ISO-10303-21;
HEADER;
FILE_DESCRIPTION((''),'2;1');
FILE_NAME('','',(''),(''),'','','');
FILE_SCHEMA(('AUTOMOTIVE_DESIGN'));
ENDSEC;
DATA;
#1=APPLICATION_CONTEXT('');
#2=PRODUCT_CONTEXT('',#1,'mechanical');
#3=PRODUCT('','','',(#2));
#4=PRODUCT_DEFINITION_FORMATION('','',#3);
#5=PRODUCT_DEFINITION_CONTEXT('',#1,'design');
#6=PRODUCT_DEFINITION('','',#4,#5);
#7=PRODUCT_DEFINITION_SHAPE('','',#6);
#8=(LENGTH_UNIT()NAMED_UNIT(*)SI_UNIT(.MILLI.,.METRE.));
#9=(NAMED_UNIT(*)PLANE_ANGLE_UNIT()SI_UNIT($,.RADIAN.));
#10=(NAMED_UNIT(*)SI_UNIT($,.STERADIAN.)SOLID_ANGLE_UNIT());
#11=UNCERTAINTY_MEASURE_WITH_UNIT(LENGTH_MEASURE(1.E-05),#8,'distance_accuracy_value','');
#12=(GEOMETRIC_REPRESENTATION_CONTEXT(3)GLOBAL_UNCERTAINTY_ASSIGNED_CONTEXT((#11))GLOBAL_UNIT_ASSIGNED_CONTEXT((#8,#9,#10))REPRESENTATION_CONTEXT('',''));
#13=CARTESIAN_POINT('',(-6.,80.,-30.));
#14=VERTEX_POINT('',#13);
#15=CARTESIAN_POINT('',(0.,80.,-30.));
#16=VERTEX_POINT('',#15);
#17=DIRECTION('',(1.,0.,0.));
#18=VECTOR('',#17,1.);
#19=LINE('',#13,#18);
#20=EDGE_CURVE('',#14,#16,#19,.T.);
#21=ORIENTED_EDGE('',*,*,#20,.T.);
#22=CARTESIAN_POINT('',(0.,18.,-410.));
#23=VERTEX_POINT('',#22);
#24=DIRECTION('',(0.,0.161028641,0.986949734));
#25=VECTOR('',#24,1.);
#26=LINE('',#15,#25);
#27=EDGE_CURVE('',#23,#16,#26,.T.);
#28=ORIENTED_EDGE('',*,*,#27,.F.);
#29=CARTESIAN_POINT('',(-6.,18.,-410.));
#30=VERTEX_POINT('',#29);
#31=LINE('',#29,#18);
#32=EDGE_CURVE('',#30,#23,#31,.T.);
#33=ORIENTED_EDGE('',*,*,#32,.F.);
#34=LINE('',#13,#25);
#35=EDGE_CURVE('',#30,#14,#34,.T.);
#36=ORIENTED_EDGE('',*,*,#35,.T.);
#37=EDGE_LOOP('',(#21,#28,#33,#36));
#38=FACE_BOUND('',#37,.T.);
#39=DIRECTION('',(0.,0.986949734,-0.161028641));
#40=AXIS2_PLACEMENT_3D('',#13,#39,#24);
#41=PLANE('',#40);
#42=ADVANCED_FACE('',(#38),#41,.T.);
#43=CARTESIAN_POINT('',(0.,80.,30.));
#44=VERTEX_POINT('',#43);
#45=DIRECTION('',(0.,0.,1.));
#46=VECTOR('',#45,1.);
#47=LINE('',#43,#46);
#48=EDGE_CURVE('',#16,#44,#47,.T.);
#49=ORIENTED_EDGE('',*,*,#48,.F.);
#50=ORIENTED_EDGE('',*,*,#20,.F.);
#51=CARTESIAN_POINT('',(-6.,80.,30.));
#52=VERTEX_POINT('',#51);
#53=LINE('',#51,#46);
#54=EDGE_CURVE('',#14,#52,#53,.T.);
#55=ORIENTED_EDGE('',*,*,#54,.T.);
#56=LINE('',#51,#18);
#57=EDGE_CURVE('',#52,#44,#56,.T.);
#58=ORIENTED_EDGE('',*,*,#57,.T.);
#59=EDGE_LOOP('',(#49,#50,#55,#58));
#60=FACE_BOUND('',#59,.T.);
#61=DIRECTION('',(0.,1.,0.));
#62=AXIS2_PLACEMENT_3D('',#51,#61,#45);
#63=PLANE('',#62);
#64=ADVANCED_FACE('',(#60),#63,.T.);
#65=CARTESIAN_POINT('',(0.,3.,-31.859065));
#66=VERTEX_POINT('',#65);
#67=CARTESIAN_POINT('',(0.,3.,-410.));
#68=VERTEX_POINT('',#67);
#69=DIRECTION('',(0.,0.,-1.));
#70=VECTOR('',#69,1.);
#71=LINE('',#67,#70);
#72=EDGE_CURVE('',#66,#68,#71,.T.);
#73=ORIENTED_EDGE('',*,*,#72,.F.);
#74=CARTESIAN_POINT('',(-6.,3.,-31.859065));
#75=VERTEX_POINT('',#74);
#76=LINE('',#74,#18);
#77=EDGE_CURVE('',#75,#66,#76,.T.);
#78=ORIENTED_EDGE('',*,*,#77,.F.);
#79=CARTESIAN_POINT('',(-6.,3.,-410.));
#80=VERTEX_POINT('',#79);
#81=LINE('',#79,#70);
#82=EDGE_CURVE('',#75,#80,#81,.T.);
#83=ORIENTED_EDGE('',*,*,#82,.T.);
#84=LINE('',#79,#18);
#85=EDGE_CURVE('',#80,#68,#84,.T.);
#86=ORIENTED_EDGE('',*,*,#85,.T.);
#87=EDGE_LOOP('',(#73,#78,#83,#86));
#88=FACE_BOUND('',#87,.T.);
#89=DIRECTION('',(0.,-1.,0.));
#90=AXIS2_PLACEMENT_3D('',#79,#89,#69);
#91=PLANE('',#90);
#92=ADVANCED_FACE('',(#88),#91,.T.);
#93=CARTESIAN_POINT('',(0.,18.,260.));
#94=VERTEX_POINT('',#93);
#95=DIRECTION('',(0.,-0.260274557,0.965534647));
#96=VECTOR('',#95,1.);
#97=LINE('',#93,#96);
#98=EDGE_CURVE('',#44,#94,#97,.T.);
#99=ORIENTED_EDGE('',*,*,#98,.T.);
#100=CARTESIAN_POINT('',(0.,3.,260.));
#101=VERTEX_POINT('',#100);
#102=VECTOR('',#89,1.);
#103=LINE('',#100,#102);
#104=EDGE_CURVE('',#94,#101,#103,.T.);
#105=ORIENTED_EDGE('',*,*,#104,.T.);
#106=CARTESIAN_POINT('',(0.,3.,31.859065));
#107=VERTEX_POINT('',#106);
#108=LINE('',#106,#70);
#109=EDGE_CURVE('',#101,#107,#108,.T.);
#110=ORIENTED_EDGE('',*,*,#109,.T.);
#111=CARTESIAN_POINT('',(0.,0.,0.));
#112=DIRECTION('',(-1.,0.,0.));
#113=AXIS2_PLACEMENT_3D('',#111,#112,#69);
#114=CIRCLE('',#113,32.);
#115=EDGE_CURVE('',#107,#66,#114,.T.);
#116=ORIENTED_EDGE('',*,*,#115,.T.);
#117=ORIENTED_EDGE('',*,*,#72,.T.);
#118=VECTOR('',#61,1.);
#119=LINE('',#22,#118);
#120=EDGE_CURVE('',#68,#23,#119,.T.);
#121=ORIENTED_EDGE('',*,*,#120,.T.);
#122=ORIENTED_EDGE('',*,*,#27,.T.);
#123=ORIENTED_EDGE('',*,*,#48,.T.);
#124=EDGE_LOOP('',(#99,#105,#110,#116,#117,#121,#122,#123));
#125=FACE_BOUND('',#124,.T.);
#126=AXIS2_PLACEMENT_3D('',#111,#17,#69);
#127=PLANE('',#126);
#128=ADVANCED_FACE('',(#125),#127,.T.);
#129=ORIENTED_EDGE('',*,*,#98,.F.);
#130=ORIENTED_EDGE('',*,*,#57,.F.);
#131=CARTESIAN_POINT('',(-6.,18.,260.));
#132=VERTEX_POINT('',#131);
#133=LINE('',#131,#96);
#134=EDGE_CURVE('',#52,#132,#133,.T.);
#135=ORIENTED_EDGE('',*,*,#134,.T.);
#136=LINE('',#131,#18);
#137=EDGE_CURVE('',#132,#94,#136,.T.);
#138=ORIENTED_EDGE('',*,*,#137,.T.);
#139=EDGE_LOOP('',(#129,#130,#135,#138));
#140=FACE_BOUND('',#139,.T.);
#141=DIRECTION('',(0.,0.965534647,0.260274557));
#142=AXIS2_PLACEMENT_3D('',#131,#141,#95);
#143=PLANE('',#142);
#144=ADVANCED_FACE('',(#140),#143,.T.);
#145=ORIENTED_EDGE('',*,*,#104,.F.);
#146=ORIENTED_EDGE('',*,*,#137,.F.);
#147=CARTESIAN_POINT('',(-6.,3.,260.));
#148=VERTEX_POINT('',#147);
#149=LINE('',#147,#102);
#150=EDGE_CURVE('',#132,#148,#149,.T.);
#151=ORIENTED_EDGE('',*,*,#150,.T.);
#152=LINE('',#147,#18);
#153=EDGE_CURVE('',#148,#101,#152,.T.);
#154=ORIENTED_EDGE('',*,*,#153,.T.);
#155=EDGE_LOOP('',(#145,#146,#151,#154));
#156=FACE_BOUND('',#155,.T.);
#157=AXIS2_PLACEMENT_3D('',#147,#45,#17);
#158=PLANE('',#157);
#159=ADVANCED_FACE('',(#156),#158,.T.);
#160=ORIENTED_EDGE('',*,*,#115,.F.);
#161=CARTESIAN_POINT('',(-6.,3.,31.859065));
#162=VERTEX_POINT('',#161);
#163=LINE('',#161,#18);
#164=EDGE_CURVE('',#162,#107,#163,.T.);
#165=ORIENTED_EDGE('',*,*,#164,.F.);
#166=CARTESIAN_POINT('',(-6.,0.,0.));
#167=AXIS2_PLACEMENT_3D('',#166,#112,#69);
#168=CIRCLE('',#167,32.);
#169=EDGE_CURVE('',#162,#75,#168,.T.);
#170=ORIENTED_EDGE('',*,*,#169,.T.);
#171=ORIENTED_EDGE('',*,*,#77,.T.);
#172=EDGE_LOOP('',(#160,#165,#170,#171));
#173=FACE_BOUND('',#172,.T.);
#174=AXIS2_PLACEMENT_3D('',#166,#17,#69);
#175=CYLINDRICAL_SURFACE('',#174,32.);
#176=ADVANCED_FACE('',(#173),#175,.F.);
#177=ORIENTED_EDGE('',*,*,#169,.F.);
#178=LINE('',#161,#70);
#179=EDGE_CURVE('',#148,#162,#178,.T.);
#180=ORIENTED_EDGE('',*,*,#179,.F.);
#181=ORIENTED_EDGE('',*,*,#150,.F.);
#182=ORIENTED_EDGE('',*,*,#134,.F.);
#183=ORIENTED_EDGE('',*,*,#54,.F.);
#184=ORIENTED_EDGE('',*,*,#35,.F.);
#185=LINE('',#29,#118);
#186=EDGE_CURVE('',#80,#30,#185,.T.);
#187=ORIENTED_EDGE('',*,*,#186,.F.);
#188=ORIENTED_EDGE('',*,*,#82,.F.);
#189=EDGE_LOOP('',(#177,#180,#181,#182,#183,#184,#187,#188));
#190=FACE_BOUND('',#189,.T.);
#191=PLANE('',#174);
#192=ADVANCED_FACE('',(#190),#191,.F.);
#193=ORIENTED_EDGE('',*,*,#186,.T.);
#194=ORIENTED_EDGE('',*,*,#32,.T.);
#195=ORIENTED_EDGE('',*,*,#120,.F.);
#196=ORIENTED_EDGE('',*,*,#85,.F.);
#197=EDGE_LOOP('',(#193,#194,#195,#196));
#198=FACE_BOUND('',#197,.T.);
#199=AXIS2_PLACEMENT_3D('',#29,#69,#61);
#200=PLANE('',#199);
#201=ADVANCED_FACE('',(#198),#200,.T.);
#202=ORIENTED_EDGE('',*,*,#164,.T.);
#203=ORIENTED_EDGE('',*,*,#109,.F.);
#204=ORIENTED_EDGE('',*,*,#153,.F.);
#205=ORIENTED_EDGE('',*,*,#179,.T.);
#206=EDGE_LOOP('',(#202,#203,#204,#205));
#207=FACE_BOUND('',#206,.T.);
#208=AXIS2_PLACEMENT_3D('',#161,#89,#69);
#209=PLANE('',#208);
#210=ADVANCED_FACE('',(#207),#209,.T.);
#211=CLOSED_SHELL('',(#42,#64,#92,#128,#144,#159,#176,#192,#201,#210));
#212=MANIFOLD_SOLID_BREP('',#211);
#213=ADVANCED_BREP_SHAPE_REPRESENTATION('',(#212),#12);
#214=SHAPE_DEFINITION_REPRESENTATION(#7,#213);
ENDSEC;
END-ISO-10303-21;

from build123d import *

# Parameters (mm, degrees)
BASE_FLANGE1_DEPTH = 6


# Sheet-metal steps are written as plain solids
with BuildPart() as part:
    # Sketch1 → Base-Flange1 (new body)
    with BuildSketch(Plane(origin=(0, 0, 0), x_dir=(0, 0, -1), z_dir=(1, 0, 0))):
        with BuildLine():
            Line((-31.859064644, 3), (-260, 3))
            Line((-260, 3), (-260, 18))
            Line((-260, 18), (-30, 80))
            Line((-30, 80), (30, 80))
            Line((30, 80), (410, 18))
            Line((410, 18), (410, 3))
            Line((410, 3), (31.859064644, 3))
            ThreePointArc((31.859064644, 3), (0, 32), (-31.859064644, 3))
        make_face()
    extrude(amount=-BASE_FLANGE1_DEPTH)


solid = part.part
